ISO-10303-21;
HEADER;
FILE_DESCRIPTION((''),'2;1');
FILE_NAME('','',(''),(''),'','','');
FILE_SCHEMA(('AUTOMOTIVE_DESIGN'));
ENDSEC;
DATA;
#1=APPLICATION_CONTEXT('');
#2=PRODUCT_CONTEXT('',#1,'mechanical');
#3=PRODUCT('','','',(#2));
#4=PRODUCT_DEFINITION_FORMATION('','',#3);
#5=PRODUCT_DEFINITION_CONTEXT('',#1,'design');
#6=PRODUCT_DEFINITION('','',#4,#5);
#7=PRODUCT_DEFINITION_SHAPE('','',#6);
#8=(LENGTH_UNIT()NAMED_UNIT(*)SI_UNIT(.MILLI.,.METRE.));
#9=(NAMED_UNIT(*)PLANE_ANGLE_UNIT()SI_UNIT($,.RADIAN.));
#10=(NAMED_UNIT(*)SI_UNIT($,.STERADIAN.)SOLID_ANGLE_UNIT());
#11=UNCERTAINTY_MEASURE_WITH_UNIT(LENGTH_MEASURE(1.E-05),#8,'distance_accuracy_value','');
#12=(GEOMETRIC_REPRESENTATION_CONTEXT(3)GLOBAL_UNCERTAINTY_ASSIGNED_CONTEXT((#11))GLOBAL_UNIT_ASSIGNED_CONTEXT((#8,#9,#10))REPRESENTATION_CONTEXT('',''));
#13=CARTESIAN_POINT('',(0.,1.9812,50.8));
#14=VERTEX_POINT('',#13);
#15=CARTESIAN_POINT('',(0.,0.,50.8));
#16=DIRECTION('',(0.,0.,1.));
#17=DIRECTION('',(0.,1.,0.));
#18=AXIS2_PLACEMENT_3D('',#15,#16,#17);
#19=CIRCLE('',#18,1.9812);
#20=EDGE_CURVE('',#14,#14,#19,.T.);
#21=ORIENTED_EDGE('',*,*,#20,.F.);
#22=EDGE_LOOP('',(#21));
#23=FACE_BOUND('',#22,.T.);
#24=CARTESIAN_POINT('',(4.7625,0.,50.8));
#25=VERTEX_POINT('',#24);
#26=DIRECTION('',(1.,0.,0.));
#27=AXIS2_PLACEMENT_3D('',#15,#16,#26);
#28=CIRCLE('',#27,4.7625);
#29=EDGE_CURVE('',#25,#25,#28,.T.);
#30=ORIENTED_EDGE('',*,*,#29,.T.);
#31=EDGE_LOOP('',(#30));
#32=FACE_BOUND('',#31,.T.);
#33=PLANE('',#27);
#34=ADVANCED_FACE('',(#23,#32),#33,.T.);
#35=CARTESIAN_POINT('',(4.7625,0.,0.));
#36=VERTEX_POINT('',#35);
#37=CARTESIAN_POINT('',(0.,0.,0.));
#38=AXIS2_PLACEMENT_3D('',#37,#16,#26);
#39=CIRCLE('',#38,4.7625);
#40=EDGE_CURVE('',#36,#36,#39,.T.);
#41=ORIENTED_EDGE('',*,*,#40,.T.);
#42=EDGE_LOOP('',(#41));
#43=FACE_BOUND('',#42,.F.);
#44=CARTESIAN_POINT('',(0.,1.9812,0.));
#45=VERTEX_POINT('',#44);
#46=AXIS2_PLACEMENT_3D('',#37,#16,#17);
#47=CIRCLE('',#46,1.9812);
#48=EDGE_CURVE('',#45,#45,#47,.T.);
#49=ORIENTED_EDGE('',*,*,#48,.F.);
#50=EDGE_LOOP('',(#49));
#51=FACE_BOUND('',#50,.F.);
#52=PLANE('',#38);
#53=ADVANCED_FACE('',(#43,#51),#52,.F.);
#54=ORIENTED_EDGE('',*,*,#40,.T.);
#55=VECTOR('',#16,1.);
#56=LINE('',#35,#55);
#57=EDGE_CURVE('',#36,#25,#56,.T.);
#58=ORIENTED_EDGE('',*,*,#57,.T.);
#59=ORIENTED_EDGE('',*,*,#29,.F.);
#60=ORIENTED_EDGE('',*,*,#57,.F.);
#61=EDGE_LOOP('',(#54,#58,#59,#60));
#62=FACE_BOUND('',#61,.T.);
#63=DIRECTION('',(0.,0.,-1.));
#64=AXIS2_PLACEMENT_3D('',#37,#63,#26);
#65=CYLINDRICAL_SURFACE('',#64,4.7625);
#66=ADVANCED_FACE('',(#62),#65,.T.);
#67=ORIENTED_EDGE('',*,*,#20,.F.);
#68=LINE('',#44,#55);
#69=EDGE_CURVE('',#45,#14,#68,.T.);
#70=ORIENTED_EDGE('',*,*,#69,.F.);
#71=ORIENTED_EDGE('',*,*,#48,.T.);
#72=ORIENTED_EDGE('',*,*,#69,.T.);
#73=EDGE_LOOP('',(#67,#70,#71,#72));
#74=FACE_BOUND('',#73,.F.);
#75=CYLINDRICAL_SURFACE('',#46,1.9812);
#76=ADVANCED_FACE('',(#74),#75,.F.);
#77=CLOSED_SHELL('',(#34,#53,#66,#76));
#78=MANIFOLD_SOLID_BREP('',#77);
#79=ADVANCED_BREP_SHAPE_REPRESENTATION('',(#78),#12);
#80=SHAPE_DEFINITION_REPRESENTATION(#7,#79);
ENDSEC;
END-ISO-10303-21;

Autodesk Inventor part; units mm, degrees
ref_plane "YZ Plane" through (0, 0, 0) normal (1, 0, 0) x (0, 1, 0)
ref_plane "XZ Plane" through (0, 0, 0) normal (0, 1, 0) x (-1, 0, 0)
ref_plane "XY Plane" through (0, 0, 0) normal (0, 0, 1) x (1, 0, 0)
sketch "Sketch1" plane through (0, 0, 0) normal (0, 0, 1) x (1, 0, 0)
  circle A0 centre (0, 0) radius 4.7625
  dimension "d10" = 9.525
extrude "Extrusion1" add sketch "Sketch1" along normal blind 50.8
hole "Hole1" at (0, 0, 0) direction (0, 0, 1) diameter 3.9624 end through all thread size "10-32 UNF" class "2B" standard "ANSI Unified Screw Threads"
equation "\"d10\" = OutsideDiameter"
equation "\"d1\" = StandoffLength"
equation "\"StandoffLength\" = 50.8"
equation "\"HoleDiameter\" = 5.1054"
equation "\"OutsideDiameter\" = 9.525"
properties material "Aluminum 6061"
